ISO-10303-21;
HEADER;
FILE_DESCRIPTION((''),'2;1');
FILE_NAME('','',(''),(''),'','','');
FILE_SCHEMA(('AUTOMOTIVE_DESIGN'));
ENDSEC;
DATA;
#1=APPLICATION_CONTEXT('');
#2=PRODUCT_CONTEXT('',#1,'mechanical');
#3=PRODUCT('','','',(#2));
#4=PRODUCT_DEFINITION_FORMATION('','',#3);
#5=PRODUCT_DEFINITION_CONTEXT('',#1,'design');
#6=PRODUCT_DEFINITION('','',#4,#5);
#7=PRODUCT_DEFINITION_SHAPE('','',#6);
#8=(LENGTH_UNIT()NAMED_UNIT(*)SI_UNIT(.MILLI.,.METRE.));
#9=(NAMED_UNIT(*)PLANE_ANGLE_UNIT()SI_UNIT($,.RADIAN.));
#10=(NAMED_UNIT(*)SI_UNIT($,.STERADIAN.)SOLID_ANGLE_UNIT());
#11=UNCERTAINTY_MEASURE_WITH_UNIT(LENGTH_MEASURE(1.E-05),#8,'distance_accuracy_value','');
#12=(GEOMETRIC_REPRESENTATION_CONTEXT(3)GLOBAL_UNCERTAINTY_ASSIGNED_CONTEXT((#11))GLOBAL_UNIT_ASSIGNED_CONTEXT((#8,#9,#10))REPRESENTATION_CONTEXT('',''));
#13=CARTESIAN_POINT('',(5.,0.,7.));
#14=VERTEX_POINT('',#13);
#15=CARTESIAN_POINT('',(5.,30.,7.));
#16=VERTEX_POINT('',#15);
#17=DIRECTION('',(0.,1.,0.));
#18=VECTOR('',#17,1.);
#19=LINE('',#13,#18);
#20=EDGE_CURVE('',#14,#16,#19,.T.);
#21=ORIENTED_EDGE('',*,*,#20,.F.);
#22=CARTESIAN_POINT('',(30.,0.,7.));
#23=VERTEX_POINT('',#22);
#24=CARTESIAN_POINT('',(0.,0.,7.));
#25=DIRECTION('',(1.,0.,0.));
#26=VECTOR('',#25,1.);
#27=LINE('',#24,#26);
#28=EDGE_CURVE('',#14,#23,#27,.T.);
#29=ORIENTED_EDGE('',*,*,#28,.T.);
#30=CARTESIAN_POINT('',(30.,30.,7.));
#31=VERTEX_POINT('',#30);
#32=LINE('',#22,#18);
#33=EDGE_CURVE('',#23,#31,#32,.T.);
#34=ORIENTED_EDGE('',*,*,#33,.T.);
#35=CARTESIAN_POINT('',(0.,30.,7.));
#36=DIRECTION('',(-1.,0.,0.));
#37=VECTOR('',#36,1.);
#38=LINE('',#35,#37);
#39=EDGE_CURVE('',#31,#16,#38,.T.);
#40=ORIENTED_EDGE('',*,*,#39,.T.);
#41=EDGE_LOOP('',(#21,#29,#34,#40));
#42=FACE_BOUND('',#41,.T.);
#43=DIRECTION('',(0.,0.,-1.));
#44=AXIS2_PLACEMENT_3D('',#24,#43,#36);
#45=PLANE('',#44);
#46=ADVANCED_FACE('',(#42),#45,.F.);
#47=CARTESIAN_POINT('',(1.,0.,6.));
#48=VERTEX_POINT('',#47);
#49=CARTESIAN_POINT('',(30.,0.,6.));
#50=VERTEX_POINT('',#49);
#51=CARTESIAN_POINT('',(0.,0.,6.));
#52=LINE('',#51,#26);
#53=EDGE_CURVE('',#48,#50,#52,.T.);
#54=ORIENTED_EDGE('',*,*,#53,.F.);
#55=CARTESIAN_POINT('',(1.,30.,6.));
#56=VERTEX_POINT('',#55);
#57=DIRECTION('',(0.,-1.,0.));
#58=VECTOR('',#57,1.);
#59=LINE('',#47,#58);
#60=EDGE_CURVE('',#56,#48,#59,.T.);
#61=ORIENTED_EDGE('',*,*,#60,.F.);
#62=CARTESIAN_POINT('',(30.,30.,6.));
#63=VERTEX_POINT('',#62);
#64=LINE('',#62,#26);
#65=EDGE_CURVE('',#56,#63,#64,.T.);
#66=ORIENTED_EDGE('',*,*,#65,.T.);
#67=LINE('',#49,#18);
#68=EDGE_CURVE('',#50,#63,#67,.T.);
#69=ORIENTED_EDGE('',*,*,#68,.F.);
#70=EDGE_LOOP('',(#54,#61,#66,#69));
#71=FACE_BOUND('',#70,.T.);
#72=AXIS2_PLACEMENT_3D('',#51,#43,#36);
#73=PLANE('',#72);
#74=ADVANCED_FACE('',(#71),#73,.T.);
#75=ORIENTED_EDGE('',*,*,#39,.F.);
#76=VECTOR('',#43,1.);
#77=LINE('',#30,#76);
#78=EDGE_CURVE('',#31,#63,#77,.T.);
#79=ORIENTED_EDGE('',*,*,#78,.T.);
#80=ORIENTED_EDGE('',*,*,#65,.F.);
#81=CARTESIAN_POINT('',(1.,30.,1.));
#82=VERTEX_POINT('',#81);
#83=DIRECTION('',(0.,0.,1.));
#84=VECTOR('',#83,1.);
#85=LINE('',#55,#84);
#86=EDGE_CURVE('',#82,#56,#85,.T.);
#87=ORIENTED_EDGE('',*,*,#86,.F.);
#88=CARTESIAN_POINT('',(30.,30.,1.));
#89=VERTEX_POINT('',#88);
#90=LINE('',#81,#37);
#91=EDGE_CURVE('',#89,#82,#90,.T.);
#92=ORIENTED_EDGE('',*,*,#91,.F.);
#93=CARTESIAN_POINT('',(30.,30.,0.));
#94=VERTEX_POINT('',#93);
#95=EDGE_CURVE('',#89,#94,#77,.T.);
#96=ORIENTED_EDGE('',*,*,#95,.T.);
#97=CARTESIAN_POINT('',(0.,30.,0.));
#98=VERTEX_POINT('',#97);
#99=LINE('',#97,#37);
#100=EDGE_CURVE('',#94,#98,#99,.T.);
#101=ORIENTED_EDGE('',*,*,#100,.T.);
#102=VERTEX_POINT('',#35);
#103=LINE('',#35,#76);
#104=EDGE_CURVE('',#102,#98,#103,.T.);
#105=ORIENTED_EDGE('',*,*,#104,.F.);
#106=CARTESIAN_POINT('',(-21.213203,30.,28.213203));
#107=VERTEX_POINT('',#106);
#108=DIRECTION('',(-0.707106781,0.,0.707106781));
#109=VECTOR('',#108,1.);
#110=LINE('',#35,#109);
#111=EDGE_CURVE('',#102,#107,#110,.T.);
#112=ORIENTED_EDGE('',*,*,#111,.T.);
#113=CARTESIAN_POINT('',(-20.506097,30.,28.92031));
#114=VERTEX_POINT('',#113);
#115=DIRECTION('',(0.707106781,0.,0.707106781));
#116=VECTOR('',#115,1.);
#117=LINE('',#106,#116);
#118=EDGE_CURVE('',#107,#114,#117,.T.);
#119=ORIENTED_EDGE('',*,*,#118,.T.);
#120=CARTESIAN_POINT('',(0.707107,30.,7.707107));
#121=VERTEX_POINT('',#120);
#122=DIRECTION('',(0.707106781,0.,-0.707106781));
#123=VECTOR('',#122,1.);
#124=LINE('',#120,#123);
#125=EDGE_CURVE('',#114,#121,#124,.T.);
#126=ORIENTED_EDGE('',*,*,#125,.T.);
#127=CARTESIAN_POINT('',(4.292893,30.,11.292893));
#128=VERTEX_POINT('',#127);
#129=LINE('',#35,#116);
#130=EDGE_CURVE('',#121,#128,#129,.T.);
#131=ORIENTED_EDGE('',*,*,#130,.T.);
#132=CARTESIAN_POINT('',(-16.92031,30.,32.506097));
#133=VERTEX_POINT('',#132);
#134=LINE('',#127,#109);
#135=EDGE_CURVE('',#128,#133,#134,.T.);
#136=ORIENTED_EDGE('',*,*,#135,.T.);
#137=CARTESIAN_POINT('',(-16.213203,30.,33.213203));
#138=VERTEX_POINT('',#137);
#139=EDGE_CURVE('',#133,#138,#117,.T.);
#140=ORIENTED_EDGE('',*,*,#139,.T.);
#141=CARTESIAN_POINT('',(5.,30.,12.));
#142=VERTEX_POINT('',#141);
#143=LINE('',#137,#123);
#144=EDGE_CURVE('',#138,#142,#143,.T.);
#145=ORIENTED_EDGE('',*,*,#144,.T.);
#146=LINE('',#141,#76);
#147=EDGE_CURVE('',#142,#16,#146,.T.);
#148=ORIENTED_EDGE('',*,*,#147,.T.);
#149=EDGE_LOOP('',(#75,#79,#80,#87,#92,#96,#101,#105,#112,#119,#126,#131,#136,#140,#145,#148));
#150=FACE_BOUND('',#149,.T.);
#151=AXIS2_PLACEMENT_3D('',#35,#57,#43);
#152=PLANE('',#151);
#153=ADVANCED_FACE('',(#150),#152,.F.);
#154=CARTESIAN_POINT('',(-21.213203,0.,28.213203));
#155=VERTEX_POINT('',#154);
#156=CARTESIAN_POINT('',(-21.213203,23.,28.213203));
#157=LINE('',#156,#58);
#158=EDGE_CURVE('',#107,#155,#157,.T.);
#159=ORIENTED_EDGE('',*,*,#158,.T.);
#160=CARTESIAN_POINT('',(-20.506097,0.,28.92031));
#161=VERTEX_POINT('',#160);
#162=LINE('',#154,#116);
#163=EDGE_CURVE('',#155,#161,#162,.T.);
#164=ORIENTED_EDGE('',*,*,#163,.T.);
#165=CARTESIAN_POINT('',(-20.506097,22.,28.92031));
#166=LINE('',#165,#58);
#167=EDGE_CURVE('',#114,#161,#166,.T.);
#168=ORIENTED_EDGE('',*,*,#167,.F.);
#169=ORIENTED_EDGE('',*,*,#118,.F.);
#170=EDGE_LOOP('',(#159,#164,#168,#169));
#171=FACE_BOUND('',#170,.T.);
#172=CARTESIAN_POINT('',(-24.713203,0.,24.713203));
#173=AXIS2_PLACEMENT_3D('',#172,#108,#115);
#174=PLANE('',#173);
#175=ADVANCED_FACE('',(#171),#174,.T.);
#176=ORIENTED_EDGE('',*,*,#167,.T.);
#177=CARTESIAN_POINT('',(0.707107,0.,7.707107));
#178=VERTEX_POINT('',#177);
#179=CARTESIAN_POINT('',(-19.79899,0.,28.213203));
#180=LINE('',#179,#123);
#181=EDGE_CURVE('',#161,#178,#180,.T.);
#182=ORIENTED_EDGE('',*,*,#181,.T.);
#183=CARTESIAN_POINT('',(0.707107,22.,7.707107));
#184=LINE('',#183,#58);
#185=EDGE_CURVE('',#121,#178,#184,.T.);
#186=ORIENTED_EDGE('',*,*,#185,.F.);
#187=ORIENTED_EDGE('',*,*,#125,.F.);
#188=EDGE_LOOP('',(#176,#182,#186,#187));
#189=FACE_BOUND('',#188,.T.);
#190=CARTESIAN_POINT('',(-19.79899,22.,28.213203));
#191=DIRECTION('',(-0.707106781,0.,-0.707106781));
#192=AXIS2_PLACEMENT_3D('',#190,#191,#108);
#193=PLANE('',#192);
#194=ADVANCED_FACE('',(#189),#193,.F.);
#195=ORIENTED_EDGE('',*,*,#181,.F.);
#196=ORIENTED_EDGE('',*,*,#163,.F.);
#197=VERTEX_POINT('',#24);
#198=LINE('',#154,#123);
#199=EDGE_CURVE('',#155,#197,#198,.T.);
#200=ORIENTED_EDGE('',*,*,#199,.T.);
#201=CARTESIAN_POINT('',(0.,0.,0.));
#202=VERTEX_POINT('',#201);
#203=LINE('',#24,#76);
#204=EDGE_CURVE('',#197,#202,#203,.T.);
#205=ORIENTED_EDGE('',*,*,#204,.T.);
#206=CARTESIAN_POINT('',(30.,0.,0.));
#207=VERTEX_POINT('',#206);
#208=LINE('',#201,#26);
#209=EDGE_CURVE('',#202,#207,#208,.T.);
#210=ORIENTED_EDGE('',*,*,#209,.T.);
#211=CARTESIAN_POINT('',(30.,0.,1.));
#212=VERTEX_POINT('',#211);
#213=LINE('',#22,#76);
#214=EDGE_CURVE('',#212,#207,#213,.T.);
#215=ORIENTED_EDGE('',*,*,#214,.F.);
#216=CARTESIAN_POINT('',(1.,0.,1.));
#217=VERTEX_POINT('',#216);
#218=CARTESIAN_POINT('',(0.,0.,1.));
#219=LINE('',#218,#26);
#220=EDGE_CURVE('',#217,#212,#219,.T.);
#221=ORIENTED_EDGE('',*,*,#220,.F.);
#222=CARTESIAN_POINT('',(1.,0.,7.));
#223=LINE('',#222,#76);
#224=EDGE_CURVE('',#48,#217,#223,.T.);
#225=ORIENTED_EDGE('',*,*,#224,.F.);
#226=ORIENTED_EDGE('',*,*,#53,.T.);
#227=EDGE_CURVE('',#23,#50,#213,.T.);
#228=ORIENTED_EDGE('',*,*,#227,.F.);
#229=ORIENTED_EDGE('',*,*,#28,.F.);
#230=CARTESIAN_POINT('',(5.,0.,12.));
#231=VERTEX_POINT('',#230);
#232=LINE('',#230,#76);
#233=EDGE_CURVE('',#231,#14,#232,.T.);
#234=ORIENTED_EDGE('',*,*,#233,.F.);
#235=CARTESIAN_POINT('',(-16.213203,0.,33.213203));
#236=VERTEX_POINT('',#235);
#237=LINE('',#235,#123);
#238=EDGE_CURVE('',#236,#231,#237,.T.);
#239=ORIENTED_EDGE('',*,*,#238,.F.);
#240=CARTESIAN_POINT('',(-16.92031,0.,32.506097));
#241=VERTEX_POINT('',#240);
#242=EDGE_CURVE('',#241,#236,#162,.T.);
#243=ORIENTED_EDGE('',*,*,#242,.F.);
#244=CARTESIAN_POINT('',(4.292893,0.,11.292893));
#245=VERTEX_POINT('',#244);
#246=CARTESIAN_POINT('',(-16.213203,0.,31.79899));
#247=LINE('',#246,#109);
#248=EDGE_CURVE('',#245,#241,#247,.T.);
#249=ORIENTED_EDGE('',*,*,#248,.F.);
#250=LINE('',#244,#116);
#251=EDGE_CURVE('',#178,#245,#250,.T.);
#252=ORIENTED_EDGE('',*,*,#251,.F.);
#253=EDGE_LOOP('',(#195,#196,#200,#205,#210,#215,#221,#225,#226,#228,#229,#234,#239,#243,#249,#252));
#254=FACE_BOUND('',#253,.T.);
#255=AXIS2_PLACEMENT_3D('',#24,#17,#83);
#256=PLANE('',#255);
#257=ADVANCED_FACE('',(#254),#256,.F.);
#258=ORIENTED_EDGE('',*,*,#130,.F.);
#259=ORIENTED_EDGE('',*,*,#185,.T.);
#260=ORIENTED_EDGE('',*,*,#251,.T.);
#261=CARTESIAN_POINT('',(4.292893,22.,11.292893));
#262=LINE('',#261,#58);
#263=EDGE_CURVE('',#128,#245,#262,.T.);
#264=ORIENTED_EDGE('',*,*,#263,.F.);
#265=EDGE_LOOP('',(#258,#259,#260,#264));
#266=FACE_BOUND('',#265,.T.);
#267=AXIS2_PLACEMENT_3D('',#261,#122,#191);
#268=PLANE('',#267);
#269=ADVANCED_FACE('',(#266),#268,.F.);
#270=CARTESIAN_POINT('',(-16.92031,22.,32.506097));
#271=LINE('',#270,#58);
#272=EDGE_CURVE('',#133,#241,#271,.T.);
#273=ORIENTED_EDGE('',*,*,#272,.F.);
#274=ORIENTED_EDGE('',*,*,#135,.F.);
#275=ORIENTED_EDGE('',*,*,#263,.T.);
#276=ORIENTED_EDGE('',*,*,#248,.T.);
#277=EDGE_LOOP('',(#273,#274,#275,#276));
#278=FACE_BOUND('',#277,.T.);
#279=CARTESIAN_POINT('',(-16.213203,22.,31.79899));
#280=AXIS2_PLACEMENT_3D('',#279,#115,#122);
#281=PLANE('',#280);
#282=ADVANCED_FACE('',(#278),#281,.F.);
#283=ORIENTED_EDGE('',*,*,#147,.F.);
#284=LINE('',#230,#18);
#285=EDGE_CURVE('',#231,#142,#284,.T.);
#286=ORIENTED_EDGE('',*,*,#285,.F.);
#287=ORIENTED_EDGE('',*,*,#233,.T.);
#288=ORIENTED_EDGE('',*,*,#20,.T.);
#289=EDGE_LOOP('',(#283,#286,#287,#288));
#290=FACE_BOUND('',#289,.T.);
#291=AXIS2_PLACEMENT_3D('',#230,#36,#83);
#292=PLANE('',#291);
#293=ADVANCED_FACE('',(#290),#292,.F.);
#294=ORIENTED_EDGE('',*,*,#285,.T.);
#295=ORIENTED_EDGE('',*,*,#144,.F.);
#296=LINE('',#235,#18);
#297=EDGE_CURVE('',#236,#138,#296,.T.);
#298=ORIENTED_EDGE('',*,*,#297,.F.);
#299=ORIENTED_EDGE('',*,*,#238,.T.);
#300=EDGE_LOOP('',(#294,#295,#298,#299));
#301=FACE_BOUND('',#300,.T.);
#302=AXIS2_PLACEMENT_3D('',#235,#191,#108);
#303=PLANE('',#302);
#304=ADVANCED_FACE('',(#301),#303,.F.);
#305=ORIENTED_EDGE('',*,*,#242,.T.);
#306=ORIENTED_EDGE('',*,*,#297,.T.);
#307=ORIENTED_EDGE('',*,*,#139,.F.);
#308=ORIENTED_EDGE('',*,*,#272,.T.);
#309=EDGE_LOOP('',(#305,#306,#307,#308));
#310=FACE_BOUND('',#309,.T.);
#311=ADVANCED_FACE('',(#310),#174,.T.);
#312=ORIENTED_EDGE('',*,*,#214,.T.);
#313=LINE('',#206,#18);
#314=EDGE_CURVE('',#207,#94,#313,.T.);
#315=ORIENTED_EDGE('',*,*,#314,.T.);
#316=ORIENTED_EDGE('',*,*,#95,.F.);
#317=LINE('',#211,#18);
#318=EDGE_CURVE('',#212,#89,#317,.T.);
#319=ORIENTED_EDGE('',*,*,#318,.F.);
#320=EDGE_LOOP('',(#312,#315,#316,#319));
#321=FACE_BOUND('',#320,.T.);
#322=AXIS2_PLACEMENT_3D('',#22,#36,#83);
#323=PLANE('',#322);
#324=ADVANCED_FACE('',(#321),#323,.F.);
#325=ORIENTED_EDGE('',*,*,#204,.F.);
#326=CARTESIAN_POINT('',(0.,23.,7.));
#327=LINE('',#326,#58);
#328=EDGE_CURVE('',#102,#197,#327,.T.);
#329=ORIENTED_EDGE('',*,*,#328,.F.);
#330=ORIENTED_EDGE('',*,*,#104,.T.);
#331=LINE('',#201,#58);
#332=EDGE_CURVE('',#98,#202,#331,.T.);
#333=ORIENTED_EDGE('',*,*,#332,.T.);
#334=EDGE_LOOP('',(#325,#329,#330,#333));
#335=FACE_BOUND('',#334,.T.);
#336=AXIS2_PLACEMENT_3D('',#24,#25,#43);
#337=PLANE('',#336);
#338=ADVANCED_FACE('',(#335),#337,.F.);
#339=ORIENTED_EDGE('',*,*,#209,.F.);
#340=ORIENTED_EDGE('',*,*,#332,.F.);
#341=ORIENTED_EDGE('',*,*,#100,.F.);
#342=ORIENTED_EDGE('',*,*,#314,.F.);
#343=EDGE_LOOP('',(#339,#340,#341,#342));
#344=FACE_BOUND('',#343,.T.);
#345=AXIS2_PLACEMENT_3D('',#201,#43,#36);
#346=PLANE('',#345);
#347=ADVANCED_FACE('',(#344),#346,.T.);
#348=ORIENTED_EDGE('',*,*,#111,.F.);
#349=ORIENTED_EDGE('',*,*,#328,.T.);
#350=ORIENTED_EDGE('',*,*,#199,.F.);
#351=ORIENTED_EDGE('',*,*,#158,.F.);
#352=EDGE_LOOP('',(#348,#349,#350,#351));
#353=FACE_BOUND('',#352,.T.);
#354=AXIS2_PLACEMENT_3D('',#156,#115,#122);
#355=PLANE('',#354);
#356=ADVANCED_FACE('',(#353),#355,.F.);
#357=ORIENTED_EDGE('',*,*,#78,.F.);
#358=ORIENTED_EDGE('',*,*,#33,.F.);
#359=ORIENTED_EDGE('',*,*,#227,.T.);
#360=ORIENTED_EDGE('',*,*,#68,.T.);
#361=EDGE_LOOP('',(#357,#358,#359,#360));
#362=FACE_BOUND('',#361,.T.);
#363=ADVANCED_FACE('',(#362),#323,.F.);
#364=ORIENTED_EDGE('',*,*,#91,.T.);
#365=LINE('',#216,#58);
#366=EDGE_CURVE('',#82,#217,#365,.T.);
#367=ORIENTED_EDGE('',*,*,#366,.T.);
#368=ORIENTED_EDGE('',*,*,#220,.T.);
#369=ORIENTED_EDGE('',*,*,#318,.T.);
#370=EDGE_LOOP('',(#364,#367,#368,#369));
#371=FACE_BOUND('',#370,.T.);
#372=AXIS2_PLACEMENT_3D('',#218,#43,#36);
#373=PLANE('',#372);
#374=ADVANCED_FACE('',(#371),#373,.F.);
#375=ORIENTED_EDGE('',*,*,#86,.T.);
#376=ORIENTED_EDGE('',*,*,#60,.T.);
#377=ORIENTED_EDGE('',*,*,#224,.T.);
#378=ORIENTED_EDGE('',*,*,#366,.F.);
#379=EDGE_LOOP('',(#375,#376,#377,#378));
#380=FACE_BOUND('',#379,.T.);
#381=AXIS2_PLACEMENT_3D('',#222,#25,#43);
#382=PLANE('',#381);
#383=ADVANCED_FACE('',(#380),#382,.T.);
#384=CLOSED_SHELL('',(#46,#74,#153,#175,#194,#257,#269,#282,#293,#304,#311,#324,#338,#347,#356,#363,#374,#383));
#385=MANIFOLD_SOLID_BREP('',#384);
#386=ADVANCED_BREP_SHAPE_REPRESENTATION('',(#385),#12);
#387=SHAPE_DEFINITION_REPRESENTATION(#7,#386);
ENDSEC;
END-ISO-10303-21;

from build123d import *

# Parameters (mm, degrees)
SKETCH1_W           = 30
SKETCH1_H           = 30
BOSS_EXTRUDE1_DEPTH = 7
SHELL1_T            = -1
SKETCH2_W           = 30
SKETCH2_H           = 7
BOSS_EXTRUDE2_DEPTH = 30
SKETCH3_W           = 30
SKETCH3_H           = 7
BOSS_EXTRUDE3_DEPTH = 30
SKETCH5_W           = 5
SKETCH5_H           = 23
BOSS_EXTRUDE4_DEPTH = 5
CUT_EXTRUDE6_DEPTH  = 23
SKETCH12_W          = 7.071067812
SKETCH12_H          = 23
BOSS_EXTRUDE6_DEPTH = 30
CUT_EXTRUDE7_DEPTH  = 22
CUT_EXTRUDE8_DEPTH  = 22
SHELL2_START        = 24
SHELL2_DEPTH        = 5
SHELL2_START_2      = 23
SHELL2_2_DEPTH      = 1
SHELL2_START_3      = 1
SHELL2_3_DEPTH      = 22
BOSS_EXTRUDE7_DEPTH = 1
BOSS_EXTRUDE8_DEPTH = 23
CUT_EXTRUDE10_DEPTH = 1
CUT_EXTRUDE11_DEPTH = 7
BOSS_EXTRUDE9_DEPTH = 7
CUT_EXTRUDE12_DEPTH = 7
SKETCH23_W          = 29
SKETCH23_H          = 5
CUT_EXTRUDE14_DEPTH = 7
CUT_EXTRUDE15_DEPTH = 7


# Read off the part's stored shape, not the designer's step: Shell2
with BuildPart() as part:
    # Sketch1 → Boss-Extrude1 (new body)
    with BuildSketch(Plane.XY):
        with Locations((15, 15)):
            Rectangle(SKETCH1_W, SKETCH1_H)
    extrude(amount=BOSS_EXTRUDE1_DEPTH)

    # Shell1
    shell1_openings = [part.faces().sort_by_distance(p)[0] for p in [
        (30, 15, 3.5),
        (15, 0, 3.5),
    ]]
    offset(amount=SHELL1_T, openings=shell1_openings, kind=Kind.INTERSECTION)

    # Sketch2 → Boss-Extrude2 (add)
    with BuildSketch(Plane.XY.offset(7)):
        with Locations((15, 26.5)):
            Rectangle(SKETCH2_W, SKETCH2_H)
    extrude(amount=BOSS_EXTRUDE2_DEPTH)

    # Sketch3 → Boss-Extrude3 (add)
    with BuildSketch(Plane.ZY):
        with Locations((22, 26.5)):
            Rectangle(SKETCH3_W, SKETCH3_H)
    extrude(amount=BOSS_EXTRUDE3_DEPTH)

    # Sketch5 → Boss-Extrude4 (add)
    with BuildSketch(Plane.XY.offset(7)):
        with Locations((2.5, 11.5)):
            Rectangle(SKETCH5_W, SKETCH5_H)
    extrude(amount=BOSS_EXTRUDE4_DEPTH)

    # Sketch6 → Cut-Extrude6 (cut)
    with BuildSketch(Plane.XZ):
        Polygon((0, 12), (5, 12), (0, 7), align=None)
    extrude(amount=-CUT_EXTRUDE6_DEPTH, mode=Mode.SUBTRACT)

    # Sketch12 → Boss-Extrude6 (add)
    with BuildSketch(Plane(origin=(-3.5, 0, 3.5), x_dir=(0.7071067811865475, 0, 0.7071067811865477), z_dir=(-0.7071067811865477, 0, 0.7071067811865475))):
        with Locations((8.485281374, 11.5)):
            Rectangle(SKETCH12_W, SKETCH12_H)
    extrude(amount=BOSS_EXTRUDE6_DEPTH)

    # Sketch13 → Cut-Extrude7 (cut)
    with BuildSketch(Plane.XZ):
        Polygon((-19.798989873, 28.213203436), (0.707106781, 7.707106781), (4.292893219, 11.292893219), (-16.213203436, 31.798989873), (-16.920310217, 32.506096654), (-20.506096654, 28.920310217), align=None)
    extrude(amount=-CUT_EXTRUDE7_DEPTH, mode=Mode.SUBTRACT)

    # Sketch4 → Cut-Extrude8 (cut)
    with BuildSketch(Plane.XZ.offset(-23)):
        Polygon((-30, 37), (0, 7), (-30, 7), align=None)
    extrude(amount=-CUT_EXTRUDE8_DEPTH, mode=Mode.SUBTRACT)

    # Shell2 outline → Shell2 (cut)
    with BuildSketch(Plane(origin=(0, 0, 0), x_dir=(1, 0, 0), z_dir=(0, 1, 0)).offset(SHELL2_START)):
        Polygon((29, -37), (29, -7), (1, -7), (1, -7.414213562), (-28.585786438, -37), align=None)
    extrude(amount=SHELL2_DEPTH, mode=Mode.SUBTRACT)

    # Shell2 2 outline → Shell2 2 (cut)
    with BuildSketch(Plane(origin=(0, 0, 0), x_dir=(1, 0, 0), z_dir=(0, 1, 0)).offset(SHELL2_START_2)):
        Polygon((4, -7), (1, -7), (1, -7.414213562), (-19.798989873, -28.213203435), (-16.213203436, -31.798989873), (4, -11.585786438), align=None)
    extrude(amount=SHELL2_2_DEPTH, mode=Mode.SUBTRACT)

    # Shell2 3 outline → Shell2 3 (cut)
    with BuildSketch(Plane(origin=(0, 0, 0), x_dir=(1, 0, 0), z_dir=(0, 1, 0)).offset(SHELL2_START_3)):
        Polygon((4, -9.585786438), (4, -7), (1.414213562, -7), align=None)
    extrude(amount=SHELL2_3_DEPTH, mode=Mode.SUBTRACT)

    # Sketch16 → Boss-Extrude7 (add)
    with BuildSketch(Plane(origin=(0, 23, 0), x_dir=(1, 0, 0), z_dir=(0, 1, 0))):
        Polygon((1.414213562, -7), (1, -7), (1, -7.414213562), (-19.798989873, -28.213203436), (-16.213203436, -31.798989873), (4, -11.585786438), (4, -9.585786438), align=None)
    extrude(amount=BOSS_EXTRUDE7_DEPTH)

    # Sketch18 → Boss-Extrude8 (add)
    with BuildSketch(Plane(origin=(0, 1, 0), x_dir=(1, 0, 0), z_dir=(0, 1, 0))):
        Polygon((4, -9.585786438), (4, -7), (1.414213562, -7), align=None)
    extrude(amount=BOSS_EXTRUDE8_DEPTH)

    # Sketch19 → Cut-Extrude10 (cut)
    with BuildSketch(Plane(origin=(30, 0, 0), x_dir=(0, 0, -1), z_dir=(1, 0, 0))):
        Polygon((-36, 29), (-37, 29), (-37, 24), (-36, 24), (-7, 24), (-7, 29), align=None)
    extrude(amount=-CUT_EXTRUDE10_DEPTH, mode=Mode.SUBTRACT)

    # Sketch17 → Cut-Extrude11 (cut)
    with BuildSketch(Plane(origin=(0, 30, 0), x_dir=(1, 0, 0), z_dir=(0, 1, 0))):
        Polygon((0, -7), (30, -7), (30, -37), (-30, -37), align=None)
    extrude(amount=-CUT_EXTRUDE11_DEPTH, mode=Mode.SUBTRACT)

    # Sketch21 → Boss-Extrude9 (add)
    with BuildSketch(Plane(origin=(0, 23, 0), x_dir=(1, 0, 0), z_dir=(0, 1, 0))):
        Polygon((5, -12), (5, -7), (0, -7), (-21.213203436, -28.213203436), (-16.213203436, -33.213203436), align=None)
    extrude(amount=BOSS_EXTRUDE9_DEPTH)

    # Sketch22 → Cut-Extrude12 (cut)
    with BuildSketch(Plane.XZ.offset(-22)):
        Polygon((-16.920310217, 32.506096654), (-20.506096654, 28.920310217), (0.707106781, 7.707106781), (4.292893219, 11.292893219), align=None)
    extrude(amount=-CUT_EXTRUDE12_DEPTH, mode=Mode.SUBTRACT)

    # Sketch23 → Cut-Extrude14 (cut)
    with BuildSketch(Plane(origin=(0, 30, 0), x_dir=(1, 0, 0), z_dir=(0, 1, 0))):
        with Locations((15.5, -3.5)):
            Rectangle(SKETCH23_W, SKETCH23_H)
    extrude(amount=-CUT_EXTRUDE14_DEPTH, mode=Mode.SUBTRACT)

    # Sketch24 → Cut-Extrude15 (cut)
    with BuildSketch(Plane.XZ.offset(-29)):
        Polygon((4.292893219, 11.292893219), (-16.920310217, 32.506096654), (-20.506096654, 28.920310217), (0.707106781, 7.707106781), align=None)
    extrude(amount=-CUT_EXTRUDE15_DEPTH, mode=Mode.SUBTRACT)


solid = part.part
